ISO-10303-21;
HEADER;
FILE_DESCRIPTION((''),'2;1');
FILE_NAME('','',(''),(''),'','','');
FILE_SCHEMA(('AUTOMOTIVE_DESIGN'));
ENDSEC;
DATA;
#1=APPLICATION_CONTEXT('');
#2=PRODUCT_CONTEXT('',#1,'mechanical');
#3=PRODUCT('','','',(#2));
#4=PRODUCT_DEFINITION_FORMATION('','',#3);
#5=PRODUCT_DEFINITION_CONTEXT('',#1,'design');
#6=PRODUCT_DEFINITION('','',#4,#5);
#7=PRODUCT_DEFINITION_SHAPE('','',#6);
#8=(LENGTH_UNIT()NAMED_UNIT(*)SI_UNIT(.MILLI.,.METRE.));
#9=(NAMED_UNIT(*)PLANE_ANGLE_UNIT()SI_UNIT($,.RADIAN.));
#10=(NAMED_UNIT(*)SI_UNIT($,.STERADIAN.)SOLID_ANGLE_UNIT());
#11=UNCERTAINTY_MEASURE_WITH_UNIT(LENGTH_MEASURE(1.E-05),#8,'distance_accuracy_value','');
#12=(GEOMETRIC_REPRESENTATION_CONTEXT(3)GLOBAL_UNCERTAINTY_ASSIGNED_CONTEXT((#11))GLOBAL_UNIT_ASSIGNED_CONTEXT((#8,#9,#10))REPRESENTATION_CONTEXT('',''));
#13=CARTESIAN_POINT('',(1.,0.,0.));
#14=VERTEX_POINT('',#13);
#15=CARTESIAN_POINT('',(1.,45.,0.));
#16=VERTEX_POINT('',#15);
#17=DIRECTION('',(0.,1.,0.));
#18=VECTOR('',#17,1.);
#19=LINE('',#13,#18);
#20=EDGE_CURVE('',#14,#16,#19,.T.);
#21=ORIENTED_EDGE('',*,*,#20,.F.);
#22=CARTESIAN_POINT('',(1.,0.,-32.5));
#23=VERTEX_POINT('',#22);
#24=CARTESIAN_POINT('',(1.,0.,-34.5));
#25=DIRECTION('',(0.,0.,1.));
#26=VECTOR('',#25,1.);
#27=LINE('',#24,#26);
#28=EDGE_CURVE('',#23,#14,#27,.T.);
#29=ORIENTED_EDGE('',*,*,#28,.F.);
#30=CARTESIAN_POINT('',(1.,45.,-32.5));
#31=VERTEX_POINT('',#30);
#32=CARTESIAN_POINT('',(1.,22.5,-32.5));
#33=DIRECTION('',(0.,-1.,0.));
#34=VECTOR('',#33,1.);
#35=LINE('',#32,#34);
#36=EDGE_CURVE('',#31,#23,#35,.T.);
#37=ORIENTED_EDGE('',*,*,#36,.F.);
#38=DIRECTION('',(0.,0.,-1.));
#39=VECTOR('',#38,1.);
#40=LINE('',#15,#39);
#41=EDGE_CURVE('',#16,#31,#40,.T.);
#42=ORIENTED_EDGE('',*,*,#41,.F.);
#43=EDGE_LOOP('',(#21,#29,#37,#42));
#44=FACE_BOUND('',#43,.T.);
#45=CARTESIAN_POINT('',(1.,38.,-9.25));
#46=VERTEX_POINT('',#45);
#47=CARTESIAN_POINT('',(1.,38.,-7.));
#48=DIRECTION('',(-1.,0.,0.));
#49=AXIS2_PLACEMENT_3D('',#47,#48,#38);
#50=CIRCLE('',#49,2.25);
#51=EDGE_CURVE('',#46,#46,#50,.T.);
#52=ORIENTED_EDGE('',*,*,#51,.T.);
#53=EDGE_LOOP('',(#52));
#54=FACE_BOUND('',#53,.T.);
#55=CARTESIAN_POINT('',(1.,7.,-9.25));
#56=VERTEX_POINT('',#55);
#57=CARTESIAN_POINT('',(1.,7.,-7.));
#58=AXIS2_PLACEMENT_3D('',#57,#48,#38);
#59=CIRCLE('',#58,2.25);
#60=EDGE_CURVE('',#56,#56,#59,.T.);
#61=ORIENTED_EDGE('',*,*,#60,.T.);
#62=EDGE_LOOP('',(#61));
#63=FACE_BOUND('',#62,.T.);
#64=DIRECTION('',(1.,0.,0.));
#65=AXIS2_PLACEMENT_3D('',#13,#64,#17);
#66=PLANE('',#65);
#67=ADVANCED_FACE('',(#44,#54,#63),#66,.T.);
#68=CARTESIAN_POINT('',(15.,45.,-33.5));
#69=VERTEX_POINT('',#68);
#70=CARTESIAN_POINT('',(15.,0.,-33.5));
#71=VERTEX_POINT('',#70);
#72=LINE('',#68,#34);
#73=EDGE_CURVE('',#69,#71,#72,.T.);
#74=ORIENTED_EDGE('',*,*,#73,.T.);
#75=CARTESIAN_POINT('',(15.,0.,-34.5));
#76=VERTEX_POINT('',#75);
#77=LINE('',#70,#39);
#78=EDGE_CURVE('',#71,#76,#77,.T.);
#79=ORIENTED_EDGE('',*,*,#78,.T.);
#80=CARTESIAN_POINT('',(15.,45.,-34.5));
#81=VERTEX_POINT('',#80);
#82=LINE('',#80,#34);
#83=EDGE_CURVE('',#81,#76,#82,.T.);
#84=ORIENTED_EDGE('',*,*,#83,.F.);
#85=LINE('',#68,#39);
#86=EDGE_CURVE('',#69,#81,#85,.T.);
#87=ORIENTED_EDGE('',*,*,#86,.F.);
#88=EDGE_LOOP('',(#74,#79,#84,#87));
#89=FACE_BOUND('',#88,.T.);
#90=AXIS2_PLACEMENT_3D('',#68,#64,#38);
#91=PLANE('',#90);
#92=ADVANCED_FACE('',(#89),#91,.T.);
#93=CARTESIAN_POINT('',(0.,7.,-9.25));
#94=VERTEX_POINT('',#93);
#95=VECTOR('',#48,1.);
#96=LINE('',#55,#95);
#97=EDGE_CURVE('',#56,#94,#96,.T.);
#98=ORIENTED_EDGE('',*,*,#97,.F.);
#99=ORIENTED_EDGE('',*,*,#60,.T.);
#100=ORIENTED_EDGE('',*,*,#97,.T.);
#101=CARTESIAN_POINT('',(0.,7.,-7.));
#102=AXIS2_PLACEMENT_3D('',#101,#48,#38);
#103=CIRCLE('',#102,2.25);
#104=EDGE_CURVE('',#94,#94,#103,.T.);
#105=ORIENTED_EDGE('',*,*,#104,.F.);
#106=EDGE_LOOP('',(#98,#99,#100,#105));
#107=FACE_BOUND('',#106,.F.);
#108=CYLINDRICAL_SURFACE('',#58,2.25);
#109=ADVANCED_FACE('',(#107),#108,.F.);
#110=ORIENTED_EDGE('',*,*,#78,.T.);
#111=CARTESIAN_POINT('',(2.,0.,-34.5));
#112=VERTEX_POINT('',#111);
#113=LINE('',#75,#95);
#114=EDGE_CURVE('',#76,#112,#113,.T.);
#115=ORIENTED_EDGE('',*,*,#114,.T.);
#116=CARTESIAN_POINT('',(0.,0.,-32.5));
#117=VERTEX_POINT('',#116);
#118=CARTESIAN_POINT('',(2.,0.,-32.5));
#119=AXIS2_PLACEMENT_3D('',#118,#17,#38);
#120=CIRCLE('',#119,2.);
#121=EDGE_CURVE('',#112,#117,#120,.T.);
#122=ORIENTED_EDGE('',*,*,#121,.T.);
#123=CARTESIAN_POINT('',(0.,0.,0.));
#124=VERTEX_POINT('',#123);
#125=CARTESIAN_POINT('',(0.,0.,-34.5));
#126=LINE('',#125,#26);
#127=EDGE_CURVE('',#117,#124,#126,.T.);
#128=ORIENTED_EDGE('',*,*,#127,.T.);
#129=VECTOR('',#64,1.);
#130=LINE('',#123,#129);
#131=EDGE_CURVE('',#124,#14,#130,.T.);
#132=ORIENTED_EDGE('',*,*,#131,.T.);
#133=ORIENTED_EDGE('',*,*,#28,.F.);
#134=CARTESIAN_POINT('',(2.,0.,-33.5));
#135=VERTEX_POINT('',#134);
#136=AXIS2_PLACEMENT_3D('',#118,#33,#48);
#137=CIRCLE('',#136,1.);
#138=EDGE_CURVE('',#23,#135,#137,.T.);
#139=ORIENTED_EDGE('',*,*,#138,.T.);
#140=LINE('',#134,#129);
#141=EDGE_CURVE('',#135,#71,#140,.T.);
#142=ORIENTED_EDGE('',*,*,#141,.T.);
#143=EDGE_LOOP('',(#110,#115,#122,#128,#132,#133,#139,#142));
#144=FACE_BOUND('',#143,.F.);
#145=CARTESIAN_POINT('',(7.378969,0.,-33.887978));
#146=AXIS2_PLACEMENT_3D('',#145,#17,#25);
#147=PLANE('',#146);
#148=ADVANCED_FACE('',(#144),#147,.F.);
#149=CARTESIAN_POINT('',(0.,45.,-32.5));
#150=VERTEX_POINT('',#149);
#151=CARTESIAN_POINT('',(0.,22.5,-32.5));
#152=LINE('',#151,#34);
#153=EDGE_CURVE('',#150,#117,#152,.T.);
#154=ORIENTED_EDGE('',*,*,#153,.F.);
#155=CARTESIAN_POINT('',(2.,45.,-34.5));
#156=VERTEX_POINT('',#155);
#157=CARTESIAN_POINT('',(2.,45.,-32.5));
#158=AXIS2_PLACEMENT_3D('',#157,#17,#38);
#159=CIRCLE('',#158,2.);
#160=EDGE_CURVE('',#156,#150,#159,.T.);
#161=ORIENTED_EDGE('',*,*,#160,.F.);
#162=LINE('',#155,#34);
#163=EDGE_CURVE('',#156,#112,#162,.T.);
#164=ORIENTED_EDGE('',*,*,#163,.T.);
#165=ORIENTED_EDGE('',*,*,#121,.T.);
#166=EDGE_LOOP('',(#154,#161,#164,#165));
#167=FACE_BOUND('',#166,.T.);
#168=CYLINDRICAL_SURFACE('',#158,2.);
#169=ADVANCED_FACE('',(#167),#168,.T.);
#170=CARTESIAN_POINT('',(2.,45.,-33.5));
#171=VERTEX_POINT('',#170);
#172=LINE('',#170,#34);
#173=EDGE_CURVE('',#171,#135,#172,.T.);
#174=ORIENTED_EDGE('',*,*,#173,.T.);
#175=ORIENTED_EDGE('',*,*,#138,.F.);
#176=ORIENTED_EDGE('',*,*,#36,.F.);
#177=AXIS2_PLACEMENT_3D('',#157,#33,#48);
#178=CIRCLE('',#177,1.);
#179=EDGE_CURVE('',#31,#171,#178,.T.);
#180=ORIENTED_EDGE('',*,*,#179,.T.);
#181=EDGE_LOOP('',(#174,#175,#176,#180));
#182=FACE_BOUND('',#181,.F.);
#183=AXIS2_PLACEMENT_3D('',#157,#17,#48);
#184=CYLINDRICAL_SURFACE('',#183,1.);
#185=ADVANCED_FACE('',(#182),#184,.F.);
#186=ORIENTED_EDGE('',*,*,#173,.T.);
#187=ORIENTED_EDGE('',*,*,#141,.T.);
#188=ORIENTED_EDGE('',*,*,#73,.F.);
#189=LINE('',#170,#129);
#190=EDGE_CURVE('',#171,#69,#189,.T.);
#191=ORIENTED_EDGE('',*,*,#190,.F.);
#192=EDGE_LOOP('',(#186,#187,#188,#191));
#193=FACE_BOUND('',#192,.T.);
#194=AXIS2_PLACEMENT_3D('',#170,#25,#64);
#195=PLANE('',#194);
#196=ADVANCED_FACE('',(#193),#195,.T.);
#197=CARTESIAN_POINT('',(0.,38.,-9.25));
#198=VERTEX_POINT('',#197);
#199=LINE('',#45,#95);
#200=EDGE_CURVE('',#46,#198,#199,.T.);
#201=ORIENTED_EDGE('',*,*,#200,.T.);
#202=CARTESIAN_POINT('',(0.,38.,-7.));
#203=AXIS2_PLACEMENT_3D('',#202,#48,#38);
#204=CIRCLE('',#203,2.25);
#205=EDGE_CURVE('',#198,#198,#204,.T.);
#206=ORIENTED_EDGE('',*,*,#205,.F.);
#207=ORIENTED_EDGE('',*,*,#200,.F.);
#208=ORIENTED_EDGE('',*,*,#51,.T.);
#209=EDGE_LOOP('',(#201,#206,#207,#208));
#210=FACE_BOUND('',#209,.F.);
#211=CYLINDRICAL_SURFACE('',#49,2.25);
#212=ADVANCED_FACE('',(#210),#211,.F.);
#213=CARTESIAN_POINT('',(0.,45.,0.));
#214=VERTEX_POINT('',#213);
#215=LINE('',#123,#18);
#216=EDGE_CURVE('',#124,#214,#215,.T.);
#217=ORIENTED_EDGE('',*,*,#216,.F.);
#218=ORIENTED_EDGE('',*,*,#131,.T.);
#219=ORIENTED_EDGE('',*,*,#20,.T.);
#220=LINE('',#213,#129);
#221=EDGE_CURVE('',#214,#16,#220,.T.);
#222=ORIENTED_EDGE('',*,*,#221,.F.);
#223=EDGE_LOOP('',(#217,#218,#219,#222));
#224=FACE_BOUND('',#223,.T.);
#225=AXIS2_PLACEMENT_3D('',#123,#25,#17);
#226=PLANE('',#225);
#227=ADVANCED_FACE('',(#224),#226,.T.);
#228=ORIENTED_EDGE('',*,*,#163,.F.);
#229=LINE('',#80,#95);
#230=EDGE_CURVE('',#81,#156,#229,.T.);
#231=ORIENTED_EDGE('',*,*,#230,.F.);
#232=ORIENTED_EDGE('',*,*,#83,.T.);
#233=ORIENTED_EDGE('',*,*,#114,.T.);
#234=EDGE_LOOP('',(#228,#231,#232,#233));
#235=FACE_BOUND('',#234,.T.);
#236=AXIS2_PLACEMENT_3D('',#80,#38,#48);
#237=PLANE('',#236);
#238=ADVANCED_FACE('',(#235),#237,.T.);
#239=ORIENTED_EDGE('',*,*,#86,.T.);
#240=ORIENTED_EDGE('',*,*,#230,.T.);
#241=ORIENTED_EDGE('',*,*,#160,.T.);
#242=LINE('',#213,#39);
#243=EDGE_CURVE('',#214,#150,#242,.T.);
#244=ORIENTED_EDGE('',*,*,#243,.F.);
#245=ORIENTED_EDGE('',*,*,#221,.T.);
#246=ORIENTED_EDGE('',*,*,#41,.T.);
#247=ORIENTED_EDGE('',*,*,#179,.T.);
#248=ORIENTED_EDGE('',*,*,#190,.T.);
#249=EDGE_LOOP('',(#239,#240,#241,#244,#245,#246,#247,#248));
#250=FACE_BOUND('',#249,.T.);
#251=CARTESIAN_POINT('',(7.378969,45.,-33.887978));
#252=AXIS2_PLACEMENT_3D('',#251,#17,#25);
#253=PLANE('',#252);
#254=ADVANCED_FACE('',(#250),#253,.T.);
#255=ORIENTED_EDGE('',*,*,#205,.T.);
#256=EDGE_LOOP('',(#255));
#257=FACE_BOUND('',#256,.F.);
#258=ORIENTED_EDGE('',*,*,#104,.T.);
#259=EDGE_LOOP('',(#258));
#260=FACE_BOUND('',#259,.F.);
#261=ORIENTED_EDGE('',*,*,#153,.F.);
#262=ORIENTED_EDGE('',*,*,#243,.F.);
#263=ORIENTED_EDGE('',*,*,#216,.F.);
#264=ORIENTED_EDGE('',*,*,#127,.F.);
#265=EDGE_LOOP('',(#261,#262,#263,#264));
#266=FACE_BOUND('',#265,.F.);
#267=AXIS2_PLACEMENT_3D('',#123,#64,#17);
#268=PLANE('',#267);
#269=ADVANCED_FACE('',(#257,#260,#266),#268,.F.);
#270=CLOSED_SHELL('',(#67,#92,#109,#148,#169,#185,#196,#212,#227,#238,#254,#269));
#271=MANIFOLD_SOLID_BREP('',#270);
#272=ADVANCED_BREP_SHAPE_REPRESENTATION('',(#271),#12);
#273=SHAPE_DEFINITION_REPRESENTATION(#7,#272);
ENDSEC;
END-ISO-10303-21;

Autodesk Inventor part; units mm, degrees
ref_plane "YZ Plane" through (0, 0, 0) normal (1, 0, 0) x (0, 1, 0)
ref_plane "XZ Plane" through (0, 0, 0) normal (0, 1, 0) x (-1, 0, 0)
ref_plane "XY Plane" through (0, 0, 0) normal (0, 0, 1) x (1, 0, 0)
sketch "Sketch1" plane through (0, 0, 0) normal (1, 0, 0) x (0, 1, 0)
  line L0 (0, 0) -> (45, 0)
  line L1 (45, 0) -> (45, -34.5)
  line L2 (45, -34.5) -> (0, -34.5)
  line L3 (0, -34.5) -> (0, 0)
  dimension "d0" = 45
  dimension "d1" = 34.5
extrude "Plate1" add sketch "Sketch1" along normal blind 1
sketch "Sketch2" plane through (0, 45, -33.5) normal (0, 0, -1) x (-1, 0, 0)
  line L0 (0, -45) -> (0, 0)
  line L1 (0, 0) -> (-15, 0)
  line L2 (-15, 0) -> (-15, -45)
  line L3 (-15, -45) -> (0, -45)
edge flange "Flange1" height 15 angle 90 thickness 1 bend radius 1 thickness toward (0, 0, -1) relief tear relief width 1 relief depth 0.5 edges at (1, 22.5, -34.5) wall of the first edge with corners at (0, 0, -33.5) (0, 45, -33.5) (15, 45, -33.5) (15, 0, -33.5)
bend "Bend1"
corner "Corner1"
sketch "Sketch3" plane through (1, 0, 0) normal (1, 0, 0) x (0, 0, -1)
  line L0 (0, 45) -> (32.5, 45) projected
  line L1 (0, 0) -> (0, 45) projected
  line L2 (32.5, 0) -> (0, 0) projected
  point P0 (7, 38)
  point P1 (7, 7)
  dimension "d13" = 7
  dimension "d14" = 7
  dimension "d15" = 7
hole "Hole1" at (1, 38, -7) at (1, 7, -7) direction (-1, 0, 0) diameter 4.5 end through all
equation "\"d15\" = d13"
equation "\"d21\" = Thickness"
equation "\"d2\" = Thickness"
equation "\"d3\" = BendReliefWidth"
equation "\"d4\" = BendReliefDepth"
equation "\"d5\" = MinimumRemnant"
equation "\"d6\" = TransitionRadius"
equation "\"d9\" = BendRadius"
equation "\"d10\" = CornerReliefSize"
equation "\"d11\" = GapSize"
equation "\"d12\" = JacobiRadiusSize"
equation "\"BendRadius\" = Thickness"
equation "\"BendReliefWidth\" = Thickness"
equation "\"BendReliefDepth\" = 0.5 * Thickness"
equation "\"CornerReliefSize\" = 4 * Thickness"
equation "\"MinimumRemnant\" = 2 * Thickness"
equation "\"TransitionRadius\" = BendRadius"
equation "\"JacobiRadiusSize\" = BendRadius"
equation "\"GapSize\" = Thickness"
equation "\"Thickness\" = 1"
properties part number "Sujeta Porta Suero-sin tubo" material "Steel, Carbon"
